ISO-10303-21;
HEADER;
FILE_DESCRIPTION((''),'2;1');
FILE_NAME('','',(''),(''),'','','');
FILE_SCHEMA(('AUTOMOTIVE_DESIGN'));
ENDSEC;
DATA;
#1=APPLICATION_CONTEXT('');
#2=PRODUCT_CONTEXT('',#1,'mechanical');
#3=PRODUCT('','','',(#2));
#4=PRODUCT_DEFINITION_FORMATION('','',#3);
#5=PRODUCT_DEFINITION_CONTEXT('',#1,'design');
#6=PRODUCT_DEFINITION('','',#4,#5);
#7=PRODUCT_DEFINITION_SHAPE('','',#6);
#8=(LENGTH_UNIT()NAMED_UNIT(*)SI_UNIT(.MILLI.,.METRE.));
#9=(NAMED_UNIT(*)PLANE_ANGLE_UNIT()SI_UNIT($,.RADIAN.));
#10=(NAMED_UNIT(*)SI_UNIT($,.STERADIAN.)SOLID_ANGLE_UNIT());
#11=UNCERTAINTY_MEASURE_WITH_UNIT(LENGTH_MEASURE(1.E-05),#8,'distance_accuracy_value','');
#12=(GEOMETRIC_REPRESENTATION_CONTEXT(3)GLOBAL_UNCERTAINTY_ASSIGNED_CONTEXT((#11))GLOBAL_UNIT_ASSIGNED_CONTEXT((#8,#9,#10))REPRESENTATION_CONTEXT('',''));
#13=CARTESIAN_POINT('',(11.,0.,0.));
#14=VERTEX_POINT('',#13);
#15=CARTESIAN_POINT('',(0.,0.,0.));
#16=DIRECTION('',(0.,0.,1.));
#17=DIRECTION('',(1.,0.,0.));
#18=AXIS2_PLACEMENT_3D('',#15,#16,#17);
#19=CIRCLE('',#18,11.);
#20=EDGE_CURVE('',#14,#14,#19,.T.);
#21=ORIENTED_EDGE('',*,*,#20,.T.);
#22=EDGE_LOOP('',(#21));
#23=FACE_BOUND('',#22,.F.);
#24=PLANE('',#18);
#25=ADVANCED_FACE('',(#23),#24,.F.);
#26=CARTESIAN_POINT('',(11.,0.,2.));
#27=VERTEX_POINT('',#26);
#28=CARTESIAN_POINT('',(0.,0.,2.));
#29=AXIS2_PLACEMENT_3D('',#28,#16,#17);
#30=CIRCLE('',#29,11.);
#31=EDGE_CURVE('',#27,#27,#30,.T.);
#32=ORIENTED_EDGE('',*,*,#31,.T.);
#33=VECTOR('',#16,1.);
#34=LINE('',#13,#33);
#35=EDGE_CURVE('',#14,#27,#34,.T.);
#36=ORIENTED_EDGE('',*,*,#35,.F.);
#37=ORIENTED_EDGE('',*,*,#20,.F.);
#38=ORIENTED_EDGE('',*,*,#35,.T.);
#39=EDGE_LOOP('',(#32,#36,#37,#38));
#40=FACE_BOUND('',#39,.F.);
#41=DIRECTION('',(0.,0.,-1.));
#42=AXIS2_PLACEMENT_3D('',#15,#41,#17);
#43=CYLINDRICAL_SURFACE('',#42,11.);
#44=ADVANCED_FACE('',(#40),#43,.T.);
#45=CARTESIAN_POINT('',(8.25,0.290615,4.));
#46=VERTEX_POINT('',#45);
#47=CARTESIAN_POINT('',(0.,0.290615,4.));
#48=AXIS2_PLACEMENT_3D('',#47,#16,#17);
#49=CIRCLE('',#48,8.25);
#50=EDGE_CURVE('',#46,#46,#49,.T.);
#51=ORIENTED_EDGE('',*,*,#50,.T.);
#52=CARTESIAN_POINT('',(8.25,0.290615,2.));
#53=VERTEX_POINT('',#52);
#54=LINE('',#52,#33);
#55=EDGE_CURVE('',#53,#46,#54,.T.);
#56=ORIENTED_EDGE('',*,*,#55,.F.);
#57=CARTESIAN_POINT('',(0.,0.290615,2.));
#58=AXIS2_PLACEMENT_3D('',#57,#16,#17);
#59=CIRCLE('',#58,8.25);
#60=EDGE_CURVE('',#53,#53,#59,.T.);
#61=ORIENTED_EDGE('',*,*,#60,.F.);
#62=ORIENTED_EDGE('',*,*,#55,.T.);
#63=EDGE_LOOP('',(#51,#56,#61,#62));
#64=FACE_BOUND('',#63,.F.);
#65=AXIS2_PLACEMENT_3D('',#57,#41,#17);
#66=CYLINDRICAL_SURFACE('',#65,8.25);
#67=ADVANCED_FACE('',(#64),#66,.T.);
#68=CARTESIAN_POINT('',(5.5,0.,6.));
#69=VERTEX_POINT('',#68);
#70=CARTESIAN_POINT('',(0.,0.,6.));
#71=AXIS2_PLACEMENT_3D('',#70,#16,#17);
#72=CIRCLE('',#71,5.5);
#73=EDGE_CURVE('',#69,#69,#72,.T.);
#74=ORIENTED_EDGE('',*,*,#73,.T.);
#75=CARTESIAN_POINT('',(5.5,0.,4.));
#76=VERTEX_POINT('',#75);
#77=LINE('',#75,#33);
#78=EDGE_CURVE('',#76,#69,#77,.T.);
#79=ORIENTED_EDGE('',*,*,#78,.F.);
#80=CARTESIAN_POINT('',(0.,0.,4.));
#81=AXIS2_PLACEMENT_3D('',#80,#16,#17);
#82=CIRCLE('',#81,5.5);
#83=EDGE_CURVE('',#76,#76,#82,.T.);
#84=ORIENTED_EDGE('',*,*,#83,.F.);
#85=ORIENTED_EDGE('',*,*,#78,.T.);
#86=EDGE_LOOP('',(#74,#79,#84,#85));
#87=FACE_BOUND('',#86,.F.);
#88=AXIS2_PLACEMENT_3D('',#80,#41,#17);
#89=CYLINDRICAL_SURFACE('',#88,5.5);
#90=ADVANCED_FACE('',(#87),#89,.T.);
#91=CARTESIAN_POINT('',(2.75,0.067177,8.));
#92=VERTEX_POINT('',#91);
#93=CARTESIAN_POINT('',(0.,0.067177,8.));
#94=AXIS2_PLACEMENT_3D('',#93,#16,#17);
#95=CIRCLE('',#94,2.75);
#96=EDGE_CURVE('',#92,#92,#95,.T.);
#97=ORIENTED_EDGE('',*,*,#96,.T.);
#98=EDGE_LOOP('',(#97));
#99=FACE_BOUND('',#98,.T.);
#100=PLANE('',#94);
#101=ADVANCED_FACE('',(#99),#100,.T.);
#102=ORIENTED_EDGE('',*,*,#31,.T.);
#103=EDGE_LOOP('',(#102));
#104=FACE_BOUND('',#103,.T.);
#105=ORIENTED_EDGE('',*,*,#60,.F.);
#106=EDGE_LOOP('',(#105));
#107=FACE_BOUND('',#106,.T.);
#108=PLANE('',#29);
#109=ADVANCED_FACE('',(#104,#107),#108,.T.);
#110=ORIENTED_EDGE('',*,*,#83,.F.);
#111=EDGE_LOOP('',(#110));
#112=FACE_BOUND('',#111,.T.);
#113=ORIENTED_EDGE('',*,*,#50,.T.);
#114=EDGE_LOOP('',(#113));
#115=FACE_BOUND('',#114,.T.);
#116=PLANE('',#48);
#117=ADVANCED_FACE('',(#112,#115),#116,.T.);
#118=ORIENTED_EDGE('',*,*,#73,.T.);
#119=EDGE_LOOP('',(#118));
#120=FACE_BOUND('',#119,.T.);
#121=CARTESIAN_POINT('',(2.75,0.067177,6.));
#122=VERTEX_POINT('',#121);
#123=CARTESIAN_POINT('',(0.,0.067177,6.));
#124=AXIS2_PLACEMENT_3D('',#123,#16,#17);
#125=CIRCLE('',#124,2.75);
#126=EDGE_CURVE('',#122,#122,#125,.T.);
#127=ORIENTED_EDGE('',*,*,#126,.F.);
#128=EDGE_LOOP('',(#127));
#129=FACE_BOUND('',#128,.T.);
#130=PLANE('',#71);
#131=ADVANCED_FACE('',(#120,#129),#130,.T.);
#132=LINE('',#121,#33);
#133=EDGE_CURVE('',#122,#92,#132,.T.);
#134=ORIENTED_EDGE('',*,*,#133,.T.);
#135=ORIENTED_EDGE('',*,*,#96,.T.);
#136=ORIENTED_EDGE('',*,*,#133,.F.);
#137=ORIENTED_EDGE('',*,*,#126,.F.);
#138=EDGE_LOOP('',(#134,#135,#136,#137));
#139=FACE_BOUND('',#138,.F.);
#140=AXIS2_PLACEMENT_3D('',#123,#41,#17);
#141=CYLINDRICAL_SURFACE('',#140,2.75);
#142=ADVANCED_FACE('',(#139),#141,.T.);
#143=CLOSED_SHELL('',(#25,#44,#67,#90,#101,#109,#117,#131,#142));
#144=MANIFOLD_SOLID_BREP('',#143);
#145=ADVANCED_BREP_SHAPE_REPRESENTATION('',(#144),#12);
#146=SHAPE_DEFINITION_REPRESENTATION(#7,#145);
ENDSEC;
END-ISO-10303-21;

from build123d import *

# Parameters (mm, degrees)
F0_R     = 11
F1_DEPTH = 2
F2_R     = 8.25
F3_DEPTH = 2
F4_R     = 5.5
F5_DEPTH = 2
F6_R     = 2.75
F7_DEPTH = 2


# Not quite as in the source:
# - a feature names something its author has since deleted; it is built from what else it names


with BuildPart() as f1:
    # F0 (on Top) → F1 (new body)
    with BuildSketch(Plane.XY):
        Circle(F0_R)
    extrude(amount=F1_DEPTH)

    # F2 (on face) → F3 (join)
    with BuildSketch(Plane.XY.offset(2)):
        with Locations((0, 0.2906154259)):
            Circle(F2_R)
    extrude(amount=F3_DEPTH)

    # F4 (on face) → F5 (join)
    with BuildSketch(Plane.XY.offset(4)):
        Circle(F4_R)
    extrude(amount=F5_DEPTH)

    # F6 (on face) → F7 (join)
    with BuildSketch(Plane.XY.offset(6)):
        with Locations((0, 0.0671765927)):
            Circle(F6_R)
    extrude(amount=F7_DEPTH)


solid = f1.part
